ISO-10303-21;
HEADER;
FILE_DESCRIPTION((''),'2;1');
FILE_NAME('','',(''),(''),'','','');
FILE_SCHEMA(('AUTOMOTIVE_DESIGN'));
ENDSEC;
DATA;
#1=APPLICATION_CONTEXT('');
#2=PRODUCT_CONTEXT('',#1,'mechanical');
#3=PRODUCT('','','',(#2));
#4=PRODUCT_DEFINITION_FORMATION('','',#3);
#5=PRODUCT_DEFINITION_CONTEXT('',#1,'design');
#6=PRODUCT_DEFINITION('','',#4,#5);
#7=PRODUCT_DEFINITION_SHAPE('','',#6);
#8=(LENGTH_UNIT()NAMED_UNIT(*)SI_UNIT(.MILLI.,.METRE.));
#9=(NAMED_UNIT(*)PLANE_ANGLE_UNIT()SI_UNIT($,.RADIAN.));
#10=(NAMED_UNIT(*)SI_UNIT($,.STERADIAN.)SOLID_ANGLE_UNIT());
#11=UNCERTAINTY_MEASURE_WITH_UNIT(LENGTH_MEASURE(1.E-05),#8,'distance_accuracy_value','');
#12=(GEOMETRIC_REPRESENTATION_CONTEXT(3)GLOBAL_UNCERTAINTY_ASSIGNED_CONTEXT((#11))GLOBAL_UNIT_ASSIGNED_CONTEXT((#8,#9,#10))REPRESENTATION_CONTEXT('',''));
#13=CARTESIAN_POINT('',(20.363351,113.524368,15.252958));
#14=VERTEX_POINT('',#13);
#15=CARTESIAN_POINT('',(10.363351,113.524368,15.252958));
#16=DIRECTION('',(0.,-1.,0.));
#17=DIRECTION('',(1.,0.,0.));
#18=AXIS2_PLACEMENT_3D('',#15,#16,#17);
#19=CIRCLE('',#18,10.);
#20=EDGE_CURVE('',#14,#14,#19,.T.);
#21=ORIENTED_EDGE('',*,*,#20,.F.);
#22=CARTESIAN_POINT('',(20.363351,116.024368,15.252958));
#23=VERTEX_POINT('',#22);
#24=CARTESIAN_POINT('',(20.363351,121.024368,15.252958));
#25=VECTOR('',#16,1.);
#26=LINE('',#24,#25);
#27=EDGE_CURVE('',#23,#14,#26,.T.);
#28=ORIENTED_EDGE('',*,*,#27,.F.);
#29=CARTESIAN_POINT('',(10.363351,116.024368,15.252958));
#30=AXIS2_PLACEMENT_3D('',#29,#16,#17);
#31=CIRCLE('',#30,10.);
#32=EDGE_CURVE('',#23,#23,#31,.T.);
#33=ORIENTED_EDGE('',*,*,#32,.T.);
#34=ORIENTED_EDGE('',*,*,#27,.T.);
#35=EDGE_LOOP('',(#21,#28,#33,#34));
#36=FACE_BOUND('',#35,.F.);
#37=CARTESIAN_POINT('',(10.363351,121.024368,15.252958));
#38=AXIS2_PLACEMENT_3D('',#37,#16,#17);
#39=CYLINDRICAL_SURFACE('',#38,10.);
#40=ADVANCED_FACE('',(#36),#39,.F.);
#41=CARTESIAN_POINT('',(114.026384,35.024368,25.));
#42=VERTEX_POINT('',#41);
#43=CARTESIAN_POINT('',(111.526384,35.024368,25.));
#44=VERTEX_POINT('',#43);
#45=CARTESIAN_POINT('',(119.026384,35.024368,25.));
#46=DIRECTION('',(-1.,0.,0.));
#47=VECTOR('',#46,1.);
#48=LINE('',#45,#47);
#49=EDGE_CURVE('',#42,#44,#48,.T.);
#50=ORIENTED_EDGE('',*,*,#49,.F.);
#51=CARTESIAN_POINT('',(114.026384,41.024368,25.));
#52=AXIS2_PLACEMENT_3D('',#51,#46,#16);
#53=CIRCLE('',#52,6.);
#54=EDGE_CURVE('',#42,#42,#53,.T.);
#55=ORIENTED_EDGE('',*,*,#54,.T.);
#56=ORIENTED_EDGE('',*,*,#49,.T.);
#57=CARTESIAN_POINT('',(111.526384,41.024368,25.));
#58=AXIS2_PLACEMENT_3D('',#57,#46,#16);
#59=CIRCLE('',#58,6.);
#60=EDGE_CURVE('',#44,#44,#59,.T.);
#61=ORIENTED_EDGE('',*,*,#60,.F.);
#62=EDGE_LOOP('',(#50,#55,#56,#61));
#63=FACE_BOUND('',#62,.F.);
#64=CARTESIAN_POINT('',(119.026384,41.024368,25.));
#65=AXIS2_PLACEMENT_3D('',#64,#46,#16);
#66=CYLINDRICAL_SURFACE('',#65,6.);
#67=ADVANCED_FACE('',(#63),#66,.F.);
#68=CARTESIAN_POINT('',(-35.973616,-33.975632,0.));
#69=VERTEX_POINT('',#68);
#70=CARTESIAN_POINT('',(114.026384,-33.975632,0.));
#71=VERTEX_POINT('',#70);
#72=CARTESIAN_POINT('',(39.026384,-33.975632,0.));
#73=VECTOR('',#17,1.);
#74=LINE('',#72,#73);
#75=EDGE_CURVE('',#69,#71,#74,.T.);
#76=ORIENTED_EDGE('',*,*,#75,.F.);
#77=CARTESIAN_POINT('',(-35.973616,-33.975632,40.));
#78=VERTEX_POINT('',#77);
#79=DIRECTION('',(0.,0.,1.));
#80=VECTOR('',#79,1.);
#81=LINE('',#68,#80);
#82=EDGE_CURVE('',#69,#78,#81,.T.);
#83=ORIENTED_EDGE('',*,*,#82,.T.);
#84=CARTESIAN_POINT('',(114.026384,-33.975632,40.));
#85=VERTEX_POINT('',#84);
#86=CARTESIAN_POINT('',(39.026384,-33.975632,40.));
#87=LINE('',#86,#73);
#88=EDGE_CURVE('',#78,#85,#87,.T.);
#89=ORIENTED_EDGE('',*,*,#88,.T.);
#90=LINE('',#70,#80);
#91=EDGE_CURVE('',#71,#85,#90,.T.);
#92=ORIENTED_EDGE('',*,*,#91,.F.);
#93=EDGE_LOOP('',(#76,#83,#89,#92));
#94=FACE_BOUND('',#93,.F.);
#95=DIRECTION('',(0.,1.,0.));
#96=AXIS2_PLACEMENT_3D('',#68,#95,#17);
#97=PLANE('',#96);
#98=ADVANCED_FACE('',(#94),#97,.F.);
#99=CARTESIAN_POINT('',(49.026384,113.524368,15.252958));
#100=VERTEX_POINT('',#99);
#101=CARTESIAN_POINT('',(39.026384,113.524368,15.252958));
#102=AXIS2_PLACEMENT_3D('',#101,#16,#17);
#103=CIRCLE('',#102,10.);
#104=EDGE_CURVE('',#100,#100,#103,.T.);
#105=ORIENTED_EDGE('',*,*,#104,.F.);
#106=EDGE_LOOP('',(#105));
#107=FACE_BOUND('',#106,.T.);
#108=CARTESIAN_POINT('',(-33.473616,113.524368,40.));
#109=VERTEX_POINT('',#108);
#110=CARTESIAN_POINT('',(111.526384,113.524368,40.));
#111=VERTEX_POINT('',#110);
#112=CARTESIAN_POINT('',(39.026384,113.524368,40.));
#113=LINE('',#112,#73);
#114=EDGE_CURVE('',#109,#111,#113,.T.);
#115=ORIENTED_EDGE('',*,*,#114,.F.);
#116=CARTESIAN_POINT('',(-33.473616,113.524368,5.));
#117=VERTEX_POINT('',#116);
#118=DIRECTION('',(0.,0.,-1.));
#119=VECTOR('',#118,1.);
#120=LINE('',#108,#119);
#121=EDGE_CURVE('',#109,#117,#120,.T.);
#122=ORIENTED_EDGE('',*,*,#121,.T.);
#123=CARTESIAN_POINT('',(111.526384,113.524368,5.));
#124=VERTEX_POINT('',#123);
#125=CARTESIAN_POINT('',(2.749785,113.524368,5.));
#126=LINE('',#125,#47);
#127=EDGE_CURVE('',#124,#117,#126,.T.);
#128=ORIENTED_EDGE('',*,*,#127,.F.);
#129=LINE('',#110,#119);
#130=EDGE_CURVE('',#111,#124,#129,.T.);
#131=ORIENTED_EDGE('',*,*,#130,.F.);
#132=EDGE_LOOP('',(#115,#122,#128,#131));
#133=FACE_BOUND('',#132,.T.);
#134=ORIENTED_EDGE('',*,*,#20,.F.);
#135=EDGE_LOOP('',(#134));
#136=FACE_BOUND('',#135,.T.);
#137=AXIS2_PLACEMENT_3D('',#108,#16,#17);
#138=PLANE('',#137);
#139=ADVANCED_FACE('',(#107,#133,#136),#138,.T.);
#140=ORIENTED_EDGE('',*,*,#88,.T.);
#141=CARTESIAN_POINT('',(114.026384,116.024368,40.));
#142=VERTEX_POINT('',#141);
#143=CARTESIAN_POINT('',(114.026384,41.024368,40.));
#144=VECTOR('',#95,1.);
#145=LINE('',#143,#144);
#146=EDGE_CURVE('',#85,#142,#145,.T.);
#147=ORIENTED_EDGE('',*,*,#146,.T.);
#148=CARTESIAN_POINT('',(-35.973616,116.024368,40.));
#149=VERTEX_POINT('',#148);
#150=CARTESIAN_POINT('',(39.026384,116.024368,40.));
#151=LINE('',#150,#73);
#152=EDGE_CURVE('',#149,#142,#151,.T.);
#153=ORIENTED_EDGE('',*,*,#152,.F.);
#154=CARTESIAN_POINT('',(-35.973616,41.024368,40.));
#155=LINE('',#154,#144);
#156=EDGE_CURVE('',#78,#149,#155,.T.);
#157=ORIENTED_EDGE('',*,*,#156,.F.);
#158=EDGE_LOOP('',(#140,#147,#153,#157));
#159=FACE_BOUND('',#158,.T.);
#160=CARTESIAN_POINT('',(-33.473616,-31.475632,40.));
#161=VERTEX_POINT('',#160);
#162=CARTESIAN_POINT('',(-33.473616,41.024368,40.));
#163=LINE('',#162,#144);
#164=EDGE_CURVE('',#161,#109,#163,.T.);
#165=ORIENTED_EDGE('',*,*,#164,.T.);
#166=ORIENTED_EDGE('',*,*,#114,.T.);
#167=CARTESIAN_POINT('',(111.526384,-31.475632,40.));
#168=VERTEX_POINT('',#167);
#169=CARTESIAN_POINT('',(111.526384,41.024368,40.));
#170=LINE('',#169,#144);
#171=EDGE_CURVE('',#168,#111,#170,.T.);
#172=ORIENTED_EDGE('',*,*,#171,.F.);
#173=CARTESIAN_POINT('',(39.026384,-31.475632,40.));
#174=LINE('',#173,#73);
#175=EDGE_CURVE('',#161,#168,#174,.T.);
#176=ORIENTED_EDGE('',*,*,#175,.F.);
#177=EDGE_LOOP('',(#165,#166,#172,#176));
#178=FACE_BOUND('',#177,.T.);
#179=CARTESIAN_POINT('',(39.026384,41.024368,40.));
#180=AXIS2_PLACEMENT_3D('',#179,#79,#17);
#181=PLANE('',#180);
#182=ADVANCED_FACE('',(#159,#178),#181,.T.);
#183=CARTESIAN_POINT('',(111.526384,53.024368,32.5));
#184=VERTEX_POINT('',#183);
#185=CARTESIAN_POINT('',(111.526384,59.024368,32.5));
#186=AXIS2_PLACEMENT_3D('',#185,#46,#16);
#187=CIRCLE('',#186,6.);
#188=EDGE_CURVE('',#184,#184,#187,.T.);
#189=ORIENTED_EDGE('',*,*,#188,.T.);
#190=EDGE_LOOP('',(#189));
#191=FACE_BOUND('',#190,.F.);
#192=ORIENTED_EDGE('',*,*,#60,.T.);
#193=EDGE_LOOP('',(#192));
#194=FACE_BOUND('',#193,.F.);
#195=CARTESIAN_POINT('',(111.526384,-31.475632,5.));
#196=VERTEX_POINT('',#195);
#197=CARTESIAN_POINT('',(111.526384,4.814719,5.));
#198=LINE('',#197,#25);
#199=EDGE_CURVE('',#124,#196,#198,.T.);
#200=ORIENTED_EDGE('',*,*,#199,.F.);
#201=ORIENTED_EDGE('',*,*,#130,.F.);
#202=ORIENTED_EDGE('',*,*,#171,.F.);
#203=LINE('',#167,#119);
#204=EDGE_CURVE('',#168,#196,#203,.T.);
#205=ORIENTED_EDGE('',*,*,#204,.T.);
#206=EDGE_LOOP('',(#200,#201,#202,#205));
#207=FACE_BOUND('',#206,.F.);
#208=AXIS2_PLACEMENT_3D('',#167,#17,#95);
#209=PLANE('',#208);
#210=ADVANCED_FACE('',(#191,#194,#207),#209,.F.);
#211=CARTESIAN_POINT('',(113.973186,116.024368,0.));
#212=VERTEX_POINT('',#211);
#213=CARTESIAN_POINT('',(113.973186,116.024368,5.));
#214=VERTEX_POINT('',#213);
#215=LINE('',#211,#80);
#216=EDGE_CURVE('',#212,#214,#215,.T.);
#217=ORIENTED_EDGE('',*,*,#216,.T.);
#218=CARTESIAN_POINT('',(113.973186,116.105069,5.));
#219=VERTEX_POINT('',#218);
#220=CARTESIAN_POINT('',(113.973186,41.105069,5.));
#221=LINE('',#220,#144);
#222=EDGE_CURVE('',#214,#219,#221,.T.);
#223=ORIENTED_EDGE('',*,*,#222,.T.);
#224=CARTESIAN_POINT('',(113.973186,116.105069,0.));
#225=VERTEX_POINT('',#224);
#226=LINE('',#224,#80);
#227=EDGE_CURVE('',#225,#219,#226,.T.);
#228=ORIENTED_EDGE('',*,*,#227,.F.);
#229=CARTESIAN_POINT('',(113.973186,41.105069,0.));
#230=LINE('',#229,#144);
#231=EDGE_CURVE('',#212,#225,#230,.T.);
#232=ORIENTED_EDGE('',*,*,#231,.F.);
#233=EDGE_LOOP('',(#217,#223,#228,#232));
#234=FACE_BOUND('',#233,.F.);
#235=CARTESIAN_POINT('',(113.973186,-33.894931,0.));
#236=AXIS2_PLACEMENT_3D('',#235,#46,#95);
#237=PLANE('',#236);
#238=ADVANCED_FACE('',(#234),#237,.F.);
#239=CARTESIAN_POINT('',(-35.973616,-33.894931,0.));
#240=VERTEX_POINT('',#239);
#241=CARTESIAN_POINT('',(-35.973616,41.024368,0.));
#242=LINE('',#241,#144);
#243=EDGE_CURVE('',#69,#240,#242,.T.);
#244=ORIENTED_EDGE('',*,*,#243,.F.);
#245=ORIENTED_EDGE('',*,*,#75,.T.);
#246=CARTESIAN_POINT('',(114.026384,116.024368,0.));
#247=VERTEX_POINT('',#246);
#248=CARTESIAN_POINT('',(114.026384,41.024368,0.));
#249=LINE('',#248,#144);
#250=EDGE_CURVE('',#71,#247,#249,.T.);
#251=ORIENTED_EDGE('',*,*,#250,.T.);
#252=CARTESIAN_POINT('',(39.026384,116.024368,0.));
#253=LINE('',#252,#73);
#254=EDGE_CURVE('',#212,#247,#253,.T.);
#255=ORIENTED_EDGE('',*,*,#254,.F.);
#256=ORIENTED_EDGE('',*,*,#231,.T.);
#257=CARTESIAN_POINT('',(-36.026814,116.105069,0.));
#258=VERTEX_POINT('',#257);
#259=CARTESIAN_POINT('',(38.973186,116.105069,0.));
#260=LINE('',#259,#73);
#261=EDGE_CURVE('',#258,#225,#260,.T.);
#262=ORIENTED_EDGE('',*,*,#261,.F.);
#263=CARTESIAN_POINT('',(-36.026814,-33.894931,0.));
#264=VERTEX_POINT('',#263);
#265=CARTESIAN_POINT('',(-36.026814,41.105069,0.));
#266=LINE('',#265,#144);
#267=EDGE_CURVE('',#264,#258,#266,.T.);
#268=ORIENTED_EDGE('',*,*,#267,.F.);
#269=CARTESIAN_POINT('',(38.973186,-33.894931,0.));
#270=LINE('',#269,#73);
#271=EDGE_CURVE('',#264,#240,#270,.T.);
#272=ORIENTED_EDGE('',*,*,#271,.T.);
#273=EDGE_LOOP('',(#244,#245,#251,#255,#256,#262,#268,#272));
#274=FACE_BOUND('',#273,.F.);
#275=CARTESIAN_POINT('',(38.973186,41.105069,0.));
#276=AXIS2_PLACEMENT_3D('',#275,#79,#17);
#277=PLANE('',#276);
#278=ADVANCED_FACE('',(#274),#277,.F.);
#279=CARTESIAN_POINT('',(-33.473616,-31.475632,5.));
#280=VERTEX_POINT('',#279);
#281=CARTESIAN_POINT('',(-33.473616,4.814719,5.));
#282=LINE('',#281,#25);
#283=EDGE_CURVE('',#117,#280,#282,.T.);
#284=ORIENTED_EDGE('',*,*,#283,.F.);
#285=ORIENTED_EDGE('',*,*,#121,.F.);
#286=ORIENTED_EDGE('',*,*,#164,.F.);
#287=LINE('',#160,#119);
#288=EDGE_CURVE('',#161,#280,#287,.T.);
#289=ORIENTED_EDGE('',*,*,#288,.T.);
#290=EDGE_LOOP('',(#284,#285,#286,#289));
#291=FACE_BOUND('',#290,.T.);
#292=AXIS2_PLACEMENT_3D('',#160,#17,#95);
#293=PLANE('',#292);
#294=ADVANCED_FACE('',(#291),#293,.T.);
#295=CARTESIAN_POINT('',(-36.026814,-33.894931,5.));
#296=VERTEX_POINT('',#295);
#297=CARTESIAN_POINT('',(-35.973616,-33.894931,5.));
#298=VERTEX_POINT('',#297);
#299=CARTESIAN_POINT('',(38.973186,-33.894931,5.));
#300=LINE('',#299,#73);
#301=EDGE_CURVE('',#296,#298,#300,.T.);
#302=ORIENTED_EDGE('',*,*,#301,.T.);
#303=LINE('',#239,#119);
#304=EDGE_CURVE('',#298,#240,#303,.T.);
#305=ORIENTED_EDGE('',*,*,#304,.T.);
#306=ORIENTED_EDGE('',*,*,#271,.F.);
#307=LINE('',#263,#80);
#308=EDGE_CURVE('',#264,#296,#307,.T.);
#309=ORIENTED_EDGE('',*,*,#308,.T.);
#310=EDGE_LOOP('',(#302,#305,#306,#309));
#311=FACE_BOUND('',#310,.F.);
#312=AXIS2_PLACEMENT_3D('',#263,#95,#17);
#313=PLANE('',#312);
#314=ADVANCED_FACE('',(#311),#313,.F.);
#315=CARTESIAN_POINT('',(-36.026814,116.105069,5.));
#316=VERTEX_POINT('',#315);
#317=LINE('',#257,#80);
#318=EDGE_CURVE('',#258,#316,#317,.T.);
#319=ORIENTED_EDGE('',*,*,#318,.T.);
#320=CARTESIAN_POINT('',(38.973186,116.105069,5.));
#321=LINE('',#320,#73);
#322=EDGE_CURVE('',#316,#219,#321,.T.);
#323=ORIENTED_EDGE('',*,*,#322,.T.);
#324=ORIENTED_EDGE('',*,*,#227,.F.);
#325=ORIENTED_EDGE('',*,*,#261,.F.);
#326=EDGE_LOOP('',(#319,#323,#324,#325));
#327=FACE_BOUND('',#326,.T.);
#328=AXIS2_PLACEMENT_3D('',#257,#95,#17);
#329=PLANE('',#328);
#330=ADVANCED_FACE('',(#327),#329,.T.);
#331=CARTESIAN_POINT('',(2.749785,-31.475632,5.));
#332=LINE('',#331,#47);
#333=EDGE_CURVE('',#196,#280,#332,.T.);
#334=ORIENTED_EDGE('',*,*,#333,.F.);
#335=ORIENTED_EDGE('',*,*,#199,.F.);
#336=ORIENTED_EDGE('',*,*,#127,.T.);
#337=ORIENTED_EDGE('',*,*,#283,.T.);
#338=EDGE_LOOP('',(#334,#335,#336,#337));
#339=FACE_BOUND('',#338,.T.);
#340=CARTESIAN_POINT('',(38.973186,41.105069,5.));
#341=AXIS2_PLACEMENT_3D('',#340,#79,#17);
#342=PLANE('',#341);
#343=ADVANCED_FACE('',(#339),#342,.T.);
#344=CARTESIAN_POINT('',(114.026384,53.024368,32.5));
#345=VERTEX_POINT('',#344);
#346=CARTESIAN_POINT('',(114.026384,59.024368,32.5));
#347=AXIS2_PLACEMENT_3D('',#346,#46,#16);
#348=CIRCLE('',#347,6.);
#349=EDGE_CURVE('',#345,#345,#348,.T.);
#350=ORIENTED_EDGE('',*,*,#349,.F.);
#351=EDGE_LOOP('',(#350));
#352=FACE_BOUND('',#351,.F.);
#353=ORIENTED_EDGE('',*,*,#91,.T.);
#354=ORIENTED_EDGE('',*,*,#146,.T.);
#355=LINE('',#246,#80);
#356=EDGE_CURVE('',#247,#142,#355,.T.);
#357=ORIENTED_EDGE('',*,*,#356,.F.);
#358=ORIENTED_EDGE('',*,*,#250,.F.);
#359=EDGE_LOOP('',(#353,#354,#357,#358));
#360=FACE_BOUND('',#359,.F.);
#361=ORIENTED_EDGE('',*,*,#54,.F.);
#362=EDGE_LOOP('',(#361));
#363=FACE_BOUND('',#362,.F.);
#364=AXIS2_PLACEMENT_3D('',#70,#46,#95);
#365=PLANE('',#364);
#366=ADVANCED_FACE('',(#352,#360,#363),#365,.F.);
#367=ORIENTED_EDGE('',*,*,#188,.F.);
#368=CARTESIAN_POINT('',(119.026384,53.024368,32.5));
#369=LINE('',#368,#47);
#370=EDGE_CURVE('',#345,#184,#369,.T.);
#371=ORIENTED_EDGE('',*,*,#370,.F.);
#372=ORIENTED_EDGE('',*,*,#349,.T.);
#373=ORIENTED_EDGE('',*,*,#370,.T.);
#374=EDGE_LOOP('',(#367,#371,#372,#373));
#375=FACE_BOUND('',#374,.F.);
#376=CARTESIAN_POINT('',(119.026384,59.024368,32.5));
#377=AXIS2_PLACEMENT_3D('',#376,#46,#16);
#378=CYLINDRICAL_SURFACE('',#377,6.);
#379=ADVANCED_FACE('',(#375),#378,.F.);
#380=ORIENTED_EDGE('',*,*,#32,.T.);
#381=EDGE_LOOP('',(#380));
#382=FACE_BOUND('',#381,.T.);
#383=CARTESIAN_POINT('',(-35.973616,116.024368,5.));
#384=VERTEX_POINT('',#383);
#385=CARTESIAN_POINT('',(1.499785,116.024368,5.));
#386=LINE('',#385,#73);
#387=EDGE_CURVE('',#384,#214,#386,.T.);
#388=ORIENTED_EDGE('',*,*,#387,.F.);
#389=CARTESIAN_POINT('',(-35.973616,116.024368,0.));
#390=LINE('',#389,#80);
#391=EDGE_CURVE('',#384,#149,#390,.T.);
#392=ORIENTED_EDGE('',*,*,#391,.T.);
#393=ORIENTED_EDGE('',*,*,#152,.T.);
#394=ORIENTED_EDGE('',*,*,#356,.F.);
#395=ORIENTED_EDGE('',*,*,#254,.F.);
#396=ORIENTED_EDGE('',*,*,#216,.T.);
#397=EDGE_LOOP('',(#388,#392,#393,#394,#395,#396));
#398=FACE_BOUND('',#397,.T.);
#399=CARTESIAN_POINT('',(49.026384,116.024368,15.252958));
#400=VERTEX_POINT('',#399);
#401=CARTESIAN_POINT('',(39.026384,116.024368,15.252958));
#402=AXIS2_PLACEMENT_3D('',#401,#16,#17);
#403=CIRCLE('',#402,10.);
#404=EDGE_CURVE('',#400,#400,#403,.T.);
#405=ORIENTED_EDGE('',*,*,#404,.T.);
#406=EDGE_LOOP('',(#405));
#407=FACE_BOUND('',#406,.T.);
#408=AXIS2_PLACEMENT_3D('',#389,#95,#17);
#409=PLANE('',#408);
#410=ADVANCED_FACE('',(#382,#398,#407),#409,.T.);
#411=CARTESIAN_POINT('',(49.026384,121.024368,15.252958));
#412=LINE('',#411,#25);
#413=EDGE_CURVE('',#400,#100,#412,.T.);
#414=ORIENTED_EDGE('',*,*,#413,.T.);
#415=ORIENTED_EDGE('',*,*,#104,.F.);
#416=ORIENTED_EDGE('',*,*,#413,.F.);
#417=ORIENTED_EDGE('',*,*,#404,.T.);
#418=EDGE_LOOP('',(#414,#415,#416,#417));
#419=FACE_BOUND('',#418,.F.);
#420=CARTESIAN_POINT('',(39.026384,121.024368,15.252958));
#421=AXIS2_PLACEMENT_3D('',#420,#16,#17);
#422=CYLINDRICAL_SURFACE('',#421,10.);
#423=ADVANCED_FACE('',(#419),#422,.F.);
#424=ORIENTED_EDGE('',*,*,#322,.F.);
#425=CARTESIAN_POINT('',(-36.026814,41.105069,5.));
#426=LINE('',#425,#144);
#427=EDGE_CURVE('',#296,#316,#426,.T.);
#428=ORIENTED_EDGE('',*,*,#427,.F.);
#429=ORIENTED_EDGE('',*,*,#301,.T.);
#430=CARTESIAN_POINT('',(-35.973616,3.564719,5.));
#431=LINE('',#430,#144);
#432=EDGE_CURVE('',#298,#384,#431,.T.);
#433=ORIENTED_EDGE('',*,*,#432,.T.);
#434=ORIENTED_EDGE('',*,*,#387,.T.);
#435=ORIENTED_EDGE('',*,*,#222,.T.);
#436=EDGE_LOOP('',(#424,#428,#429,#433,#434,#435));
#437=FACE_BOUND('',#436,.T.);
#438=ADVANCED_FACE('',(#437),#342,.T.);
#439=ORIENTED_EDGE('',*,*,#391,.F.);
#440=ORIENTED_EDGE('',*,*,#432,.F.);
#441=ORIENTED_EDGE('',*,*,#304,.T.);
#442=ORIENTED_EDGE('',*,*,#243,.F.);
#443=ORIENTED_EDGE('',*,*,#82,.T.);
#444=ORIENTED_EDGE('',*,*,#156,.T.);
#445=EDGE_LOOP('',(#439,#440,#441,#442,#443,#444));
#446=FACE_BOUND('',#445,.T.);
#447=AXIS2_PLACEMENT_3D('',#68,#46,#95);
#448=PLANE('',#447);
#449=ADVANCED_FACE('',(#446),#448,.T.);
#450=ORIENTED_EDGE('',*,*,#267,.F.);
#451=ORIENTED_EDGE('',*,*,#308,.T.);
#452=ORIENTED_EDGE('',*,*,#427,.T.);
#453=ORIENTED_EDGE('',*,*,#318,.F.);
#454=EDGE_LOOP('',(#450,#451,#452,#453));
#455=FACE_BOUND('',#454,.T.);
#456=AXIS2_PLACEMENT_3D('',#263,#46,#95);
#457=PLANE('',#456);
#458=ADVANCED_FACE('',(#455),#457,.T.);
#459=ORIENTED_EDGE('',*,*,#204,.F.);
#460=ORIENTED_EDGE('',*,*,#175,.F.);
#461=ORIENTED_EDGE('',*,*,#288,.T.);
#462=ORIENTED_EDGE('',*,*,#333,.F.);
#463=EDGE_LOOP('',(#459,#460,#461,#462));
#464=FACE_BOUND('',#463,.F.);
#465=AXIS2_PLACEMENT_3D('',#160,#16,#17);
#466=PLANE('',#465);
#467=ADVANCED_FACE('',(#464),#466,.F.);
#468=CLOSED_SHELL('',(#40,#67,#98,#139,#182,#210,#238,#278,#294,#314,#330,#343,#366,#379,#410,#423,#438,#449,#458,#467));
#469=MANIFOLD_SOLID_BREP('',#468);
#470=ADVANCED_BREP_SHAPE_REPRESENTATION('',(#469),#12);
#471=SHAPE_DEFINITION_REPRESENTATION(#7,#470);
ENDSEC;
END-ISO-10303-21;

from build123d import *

# Parameters (mm, degrees)
F0_W      = 150
F0_H      = 150
F1_DEPTH  = 40
F2_W      = 145
F2_H      = 145
F3_DEPTH  = 135
F6_D      = 20
F6_DEPTH  = 5
F6_TIP    = 6.0086061903
F7_W      = 150
F7_H      = 150
F8_DEPTH  = 5
F10_D     = 12
F10_DEPTH = 5
F10_TIP   = 3.6051637142


with BuildPart() as f1:
    # F0 (on Top) → F1 (new body)
    with BuildSketch(Plane.XY):
        with Locations((39.0263837129, 41.0243682017)):
            Rectangle(F0_W, F0_H)
    extrude(amount=F1_DEPTH)

    # F2 (on face) → F3 (cut)
    with BuildSketch(Plane.XY.offset(40)):
        with Locations((39.0263837129, 41.0243682017)):
            Rectangle(F2_W, F2_H)
    extrude(amount=-F3_DEPTH, mode=Mode.SUBTRACT)

    # F6
    with Locations(Plane(origin=(0, 116.0243682017, 0), x_dir=(-1, 0, 0), z_dir=(0, 1, 0))):
        with Locations((-39.0263837129, 15.2529580519), (-10.3633506224, 15.2529580519)):
            Hole(F6_D / 2, depth=F6_DEPTH)
            with Locations((0, 0, -(F6_DEPTH + F6_TIP / 2))):  # 118° drill point
                Cone(0, F6_D / 2, F6_TIP, mode=Mode.SUBTRACT)

    # F7 (on Top) → F8 (join)
    with BuildSketch(Plane.XY):
        with Locations((38.9731861651, 41.1050692201)):
            Rectangle(F7_W, F7_H)
    extrude(amount=F8_DEPTH)

    # F10
    with Locations(Plane.YZ.offset(114.0263837129)):
        with Locations((59.0243682017, 32.5), (41.0243682017, 25)):
            Hole(F10_D / 2, depth=F10_DEPTH)
            with Locations((0, 0, -(F10_DEPTH + F10_TIP / 2))):  # 118° drill point
                Cone(0, F10_D / 2, F10_TIP, mode=Mode.SUBTRACT)


solid = f1.part
